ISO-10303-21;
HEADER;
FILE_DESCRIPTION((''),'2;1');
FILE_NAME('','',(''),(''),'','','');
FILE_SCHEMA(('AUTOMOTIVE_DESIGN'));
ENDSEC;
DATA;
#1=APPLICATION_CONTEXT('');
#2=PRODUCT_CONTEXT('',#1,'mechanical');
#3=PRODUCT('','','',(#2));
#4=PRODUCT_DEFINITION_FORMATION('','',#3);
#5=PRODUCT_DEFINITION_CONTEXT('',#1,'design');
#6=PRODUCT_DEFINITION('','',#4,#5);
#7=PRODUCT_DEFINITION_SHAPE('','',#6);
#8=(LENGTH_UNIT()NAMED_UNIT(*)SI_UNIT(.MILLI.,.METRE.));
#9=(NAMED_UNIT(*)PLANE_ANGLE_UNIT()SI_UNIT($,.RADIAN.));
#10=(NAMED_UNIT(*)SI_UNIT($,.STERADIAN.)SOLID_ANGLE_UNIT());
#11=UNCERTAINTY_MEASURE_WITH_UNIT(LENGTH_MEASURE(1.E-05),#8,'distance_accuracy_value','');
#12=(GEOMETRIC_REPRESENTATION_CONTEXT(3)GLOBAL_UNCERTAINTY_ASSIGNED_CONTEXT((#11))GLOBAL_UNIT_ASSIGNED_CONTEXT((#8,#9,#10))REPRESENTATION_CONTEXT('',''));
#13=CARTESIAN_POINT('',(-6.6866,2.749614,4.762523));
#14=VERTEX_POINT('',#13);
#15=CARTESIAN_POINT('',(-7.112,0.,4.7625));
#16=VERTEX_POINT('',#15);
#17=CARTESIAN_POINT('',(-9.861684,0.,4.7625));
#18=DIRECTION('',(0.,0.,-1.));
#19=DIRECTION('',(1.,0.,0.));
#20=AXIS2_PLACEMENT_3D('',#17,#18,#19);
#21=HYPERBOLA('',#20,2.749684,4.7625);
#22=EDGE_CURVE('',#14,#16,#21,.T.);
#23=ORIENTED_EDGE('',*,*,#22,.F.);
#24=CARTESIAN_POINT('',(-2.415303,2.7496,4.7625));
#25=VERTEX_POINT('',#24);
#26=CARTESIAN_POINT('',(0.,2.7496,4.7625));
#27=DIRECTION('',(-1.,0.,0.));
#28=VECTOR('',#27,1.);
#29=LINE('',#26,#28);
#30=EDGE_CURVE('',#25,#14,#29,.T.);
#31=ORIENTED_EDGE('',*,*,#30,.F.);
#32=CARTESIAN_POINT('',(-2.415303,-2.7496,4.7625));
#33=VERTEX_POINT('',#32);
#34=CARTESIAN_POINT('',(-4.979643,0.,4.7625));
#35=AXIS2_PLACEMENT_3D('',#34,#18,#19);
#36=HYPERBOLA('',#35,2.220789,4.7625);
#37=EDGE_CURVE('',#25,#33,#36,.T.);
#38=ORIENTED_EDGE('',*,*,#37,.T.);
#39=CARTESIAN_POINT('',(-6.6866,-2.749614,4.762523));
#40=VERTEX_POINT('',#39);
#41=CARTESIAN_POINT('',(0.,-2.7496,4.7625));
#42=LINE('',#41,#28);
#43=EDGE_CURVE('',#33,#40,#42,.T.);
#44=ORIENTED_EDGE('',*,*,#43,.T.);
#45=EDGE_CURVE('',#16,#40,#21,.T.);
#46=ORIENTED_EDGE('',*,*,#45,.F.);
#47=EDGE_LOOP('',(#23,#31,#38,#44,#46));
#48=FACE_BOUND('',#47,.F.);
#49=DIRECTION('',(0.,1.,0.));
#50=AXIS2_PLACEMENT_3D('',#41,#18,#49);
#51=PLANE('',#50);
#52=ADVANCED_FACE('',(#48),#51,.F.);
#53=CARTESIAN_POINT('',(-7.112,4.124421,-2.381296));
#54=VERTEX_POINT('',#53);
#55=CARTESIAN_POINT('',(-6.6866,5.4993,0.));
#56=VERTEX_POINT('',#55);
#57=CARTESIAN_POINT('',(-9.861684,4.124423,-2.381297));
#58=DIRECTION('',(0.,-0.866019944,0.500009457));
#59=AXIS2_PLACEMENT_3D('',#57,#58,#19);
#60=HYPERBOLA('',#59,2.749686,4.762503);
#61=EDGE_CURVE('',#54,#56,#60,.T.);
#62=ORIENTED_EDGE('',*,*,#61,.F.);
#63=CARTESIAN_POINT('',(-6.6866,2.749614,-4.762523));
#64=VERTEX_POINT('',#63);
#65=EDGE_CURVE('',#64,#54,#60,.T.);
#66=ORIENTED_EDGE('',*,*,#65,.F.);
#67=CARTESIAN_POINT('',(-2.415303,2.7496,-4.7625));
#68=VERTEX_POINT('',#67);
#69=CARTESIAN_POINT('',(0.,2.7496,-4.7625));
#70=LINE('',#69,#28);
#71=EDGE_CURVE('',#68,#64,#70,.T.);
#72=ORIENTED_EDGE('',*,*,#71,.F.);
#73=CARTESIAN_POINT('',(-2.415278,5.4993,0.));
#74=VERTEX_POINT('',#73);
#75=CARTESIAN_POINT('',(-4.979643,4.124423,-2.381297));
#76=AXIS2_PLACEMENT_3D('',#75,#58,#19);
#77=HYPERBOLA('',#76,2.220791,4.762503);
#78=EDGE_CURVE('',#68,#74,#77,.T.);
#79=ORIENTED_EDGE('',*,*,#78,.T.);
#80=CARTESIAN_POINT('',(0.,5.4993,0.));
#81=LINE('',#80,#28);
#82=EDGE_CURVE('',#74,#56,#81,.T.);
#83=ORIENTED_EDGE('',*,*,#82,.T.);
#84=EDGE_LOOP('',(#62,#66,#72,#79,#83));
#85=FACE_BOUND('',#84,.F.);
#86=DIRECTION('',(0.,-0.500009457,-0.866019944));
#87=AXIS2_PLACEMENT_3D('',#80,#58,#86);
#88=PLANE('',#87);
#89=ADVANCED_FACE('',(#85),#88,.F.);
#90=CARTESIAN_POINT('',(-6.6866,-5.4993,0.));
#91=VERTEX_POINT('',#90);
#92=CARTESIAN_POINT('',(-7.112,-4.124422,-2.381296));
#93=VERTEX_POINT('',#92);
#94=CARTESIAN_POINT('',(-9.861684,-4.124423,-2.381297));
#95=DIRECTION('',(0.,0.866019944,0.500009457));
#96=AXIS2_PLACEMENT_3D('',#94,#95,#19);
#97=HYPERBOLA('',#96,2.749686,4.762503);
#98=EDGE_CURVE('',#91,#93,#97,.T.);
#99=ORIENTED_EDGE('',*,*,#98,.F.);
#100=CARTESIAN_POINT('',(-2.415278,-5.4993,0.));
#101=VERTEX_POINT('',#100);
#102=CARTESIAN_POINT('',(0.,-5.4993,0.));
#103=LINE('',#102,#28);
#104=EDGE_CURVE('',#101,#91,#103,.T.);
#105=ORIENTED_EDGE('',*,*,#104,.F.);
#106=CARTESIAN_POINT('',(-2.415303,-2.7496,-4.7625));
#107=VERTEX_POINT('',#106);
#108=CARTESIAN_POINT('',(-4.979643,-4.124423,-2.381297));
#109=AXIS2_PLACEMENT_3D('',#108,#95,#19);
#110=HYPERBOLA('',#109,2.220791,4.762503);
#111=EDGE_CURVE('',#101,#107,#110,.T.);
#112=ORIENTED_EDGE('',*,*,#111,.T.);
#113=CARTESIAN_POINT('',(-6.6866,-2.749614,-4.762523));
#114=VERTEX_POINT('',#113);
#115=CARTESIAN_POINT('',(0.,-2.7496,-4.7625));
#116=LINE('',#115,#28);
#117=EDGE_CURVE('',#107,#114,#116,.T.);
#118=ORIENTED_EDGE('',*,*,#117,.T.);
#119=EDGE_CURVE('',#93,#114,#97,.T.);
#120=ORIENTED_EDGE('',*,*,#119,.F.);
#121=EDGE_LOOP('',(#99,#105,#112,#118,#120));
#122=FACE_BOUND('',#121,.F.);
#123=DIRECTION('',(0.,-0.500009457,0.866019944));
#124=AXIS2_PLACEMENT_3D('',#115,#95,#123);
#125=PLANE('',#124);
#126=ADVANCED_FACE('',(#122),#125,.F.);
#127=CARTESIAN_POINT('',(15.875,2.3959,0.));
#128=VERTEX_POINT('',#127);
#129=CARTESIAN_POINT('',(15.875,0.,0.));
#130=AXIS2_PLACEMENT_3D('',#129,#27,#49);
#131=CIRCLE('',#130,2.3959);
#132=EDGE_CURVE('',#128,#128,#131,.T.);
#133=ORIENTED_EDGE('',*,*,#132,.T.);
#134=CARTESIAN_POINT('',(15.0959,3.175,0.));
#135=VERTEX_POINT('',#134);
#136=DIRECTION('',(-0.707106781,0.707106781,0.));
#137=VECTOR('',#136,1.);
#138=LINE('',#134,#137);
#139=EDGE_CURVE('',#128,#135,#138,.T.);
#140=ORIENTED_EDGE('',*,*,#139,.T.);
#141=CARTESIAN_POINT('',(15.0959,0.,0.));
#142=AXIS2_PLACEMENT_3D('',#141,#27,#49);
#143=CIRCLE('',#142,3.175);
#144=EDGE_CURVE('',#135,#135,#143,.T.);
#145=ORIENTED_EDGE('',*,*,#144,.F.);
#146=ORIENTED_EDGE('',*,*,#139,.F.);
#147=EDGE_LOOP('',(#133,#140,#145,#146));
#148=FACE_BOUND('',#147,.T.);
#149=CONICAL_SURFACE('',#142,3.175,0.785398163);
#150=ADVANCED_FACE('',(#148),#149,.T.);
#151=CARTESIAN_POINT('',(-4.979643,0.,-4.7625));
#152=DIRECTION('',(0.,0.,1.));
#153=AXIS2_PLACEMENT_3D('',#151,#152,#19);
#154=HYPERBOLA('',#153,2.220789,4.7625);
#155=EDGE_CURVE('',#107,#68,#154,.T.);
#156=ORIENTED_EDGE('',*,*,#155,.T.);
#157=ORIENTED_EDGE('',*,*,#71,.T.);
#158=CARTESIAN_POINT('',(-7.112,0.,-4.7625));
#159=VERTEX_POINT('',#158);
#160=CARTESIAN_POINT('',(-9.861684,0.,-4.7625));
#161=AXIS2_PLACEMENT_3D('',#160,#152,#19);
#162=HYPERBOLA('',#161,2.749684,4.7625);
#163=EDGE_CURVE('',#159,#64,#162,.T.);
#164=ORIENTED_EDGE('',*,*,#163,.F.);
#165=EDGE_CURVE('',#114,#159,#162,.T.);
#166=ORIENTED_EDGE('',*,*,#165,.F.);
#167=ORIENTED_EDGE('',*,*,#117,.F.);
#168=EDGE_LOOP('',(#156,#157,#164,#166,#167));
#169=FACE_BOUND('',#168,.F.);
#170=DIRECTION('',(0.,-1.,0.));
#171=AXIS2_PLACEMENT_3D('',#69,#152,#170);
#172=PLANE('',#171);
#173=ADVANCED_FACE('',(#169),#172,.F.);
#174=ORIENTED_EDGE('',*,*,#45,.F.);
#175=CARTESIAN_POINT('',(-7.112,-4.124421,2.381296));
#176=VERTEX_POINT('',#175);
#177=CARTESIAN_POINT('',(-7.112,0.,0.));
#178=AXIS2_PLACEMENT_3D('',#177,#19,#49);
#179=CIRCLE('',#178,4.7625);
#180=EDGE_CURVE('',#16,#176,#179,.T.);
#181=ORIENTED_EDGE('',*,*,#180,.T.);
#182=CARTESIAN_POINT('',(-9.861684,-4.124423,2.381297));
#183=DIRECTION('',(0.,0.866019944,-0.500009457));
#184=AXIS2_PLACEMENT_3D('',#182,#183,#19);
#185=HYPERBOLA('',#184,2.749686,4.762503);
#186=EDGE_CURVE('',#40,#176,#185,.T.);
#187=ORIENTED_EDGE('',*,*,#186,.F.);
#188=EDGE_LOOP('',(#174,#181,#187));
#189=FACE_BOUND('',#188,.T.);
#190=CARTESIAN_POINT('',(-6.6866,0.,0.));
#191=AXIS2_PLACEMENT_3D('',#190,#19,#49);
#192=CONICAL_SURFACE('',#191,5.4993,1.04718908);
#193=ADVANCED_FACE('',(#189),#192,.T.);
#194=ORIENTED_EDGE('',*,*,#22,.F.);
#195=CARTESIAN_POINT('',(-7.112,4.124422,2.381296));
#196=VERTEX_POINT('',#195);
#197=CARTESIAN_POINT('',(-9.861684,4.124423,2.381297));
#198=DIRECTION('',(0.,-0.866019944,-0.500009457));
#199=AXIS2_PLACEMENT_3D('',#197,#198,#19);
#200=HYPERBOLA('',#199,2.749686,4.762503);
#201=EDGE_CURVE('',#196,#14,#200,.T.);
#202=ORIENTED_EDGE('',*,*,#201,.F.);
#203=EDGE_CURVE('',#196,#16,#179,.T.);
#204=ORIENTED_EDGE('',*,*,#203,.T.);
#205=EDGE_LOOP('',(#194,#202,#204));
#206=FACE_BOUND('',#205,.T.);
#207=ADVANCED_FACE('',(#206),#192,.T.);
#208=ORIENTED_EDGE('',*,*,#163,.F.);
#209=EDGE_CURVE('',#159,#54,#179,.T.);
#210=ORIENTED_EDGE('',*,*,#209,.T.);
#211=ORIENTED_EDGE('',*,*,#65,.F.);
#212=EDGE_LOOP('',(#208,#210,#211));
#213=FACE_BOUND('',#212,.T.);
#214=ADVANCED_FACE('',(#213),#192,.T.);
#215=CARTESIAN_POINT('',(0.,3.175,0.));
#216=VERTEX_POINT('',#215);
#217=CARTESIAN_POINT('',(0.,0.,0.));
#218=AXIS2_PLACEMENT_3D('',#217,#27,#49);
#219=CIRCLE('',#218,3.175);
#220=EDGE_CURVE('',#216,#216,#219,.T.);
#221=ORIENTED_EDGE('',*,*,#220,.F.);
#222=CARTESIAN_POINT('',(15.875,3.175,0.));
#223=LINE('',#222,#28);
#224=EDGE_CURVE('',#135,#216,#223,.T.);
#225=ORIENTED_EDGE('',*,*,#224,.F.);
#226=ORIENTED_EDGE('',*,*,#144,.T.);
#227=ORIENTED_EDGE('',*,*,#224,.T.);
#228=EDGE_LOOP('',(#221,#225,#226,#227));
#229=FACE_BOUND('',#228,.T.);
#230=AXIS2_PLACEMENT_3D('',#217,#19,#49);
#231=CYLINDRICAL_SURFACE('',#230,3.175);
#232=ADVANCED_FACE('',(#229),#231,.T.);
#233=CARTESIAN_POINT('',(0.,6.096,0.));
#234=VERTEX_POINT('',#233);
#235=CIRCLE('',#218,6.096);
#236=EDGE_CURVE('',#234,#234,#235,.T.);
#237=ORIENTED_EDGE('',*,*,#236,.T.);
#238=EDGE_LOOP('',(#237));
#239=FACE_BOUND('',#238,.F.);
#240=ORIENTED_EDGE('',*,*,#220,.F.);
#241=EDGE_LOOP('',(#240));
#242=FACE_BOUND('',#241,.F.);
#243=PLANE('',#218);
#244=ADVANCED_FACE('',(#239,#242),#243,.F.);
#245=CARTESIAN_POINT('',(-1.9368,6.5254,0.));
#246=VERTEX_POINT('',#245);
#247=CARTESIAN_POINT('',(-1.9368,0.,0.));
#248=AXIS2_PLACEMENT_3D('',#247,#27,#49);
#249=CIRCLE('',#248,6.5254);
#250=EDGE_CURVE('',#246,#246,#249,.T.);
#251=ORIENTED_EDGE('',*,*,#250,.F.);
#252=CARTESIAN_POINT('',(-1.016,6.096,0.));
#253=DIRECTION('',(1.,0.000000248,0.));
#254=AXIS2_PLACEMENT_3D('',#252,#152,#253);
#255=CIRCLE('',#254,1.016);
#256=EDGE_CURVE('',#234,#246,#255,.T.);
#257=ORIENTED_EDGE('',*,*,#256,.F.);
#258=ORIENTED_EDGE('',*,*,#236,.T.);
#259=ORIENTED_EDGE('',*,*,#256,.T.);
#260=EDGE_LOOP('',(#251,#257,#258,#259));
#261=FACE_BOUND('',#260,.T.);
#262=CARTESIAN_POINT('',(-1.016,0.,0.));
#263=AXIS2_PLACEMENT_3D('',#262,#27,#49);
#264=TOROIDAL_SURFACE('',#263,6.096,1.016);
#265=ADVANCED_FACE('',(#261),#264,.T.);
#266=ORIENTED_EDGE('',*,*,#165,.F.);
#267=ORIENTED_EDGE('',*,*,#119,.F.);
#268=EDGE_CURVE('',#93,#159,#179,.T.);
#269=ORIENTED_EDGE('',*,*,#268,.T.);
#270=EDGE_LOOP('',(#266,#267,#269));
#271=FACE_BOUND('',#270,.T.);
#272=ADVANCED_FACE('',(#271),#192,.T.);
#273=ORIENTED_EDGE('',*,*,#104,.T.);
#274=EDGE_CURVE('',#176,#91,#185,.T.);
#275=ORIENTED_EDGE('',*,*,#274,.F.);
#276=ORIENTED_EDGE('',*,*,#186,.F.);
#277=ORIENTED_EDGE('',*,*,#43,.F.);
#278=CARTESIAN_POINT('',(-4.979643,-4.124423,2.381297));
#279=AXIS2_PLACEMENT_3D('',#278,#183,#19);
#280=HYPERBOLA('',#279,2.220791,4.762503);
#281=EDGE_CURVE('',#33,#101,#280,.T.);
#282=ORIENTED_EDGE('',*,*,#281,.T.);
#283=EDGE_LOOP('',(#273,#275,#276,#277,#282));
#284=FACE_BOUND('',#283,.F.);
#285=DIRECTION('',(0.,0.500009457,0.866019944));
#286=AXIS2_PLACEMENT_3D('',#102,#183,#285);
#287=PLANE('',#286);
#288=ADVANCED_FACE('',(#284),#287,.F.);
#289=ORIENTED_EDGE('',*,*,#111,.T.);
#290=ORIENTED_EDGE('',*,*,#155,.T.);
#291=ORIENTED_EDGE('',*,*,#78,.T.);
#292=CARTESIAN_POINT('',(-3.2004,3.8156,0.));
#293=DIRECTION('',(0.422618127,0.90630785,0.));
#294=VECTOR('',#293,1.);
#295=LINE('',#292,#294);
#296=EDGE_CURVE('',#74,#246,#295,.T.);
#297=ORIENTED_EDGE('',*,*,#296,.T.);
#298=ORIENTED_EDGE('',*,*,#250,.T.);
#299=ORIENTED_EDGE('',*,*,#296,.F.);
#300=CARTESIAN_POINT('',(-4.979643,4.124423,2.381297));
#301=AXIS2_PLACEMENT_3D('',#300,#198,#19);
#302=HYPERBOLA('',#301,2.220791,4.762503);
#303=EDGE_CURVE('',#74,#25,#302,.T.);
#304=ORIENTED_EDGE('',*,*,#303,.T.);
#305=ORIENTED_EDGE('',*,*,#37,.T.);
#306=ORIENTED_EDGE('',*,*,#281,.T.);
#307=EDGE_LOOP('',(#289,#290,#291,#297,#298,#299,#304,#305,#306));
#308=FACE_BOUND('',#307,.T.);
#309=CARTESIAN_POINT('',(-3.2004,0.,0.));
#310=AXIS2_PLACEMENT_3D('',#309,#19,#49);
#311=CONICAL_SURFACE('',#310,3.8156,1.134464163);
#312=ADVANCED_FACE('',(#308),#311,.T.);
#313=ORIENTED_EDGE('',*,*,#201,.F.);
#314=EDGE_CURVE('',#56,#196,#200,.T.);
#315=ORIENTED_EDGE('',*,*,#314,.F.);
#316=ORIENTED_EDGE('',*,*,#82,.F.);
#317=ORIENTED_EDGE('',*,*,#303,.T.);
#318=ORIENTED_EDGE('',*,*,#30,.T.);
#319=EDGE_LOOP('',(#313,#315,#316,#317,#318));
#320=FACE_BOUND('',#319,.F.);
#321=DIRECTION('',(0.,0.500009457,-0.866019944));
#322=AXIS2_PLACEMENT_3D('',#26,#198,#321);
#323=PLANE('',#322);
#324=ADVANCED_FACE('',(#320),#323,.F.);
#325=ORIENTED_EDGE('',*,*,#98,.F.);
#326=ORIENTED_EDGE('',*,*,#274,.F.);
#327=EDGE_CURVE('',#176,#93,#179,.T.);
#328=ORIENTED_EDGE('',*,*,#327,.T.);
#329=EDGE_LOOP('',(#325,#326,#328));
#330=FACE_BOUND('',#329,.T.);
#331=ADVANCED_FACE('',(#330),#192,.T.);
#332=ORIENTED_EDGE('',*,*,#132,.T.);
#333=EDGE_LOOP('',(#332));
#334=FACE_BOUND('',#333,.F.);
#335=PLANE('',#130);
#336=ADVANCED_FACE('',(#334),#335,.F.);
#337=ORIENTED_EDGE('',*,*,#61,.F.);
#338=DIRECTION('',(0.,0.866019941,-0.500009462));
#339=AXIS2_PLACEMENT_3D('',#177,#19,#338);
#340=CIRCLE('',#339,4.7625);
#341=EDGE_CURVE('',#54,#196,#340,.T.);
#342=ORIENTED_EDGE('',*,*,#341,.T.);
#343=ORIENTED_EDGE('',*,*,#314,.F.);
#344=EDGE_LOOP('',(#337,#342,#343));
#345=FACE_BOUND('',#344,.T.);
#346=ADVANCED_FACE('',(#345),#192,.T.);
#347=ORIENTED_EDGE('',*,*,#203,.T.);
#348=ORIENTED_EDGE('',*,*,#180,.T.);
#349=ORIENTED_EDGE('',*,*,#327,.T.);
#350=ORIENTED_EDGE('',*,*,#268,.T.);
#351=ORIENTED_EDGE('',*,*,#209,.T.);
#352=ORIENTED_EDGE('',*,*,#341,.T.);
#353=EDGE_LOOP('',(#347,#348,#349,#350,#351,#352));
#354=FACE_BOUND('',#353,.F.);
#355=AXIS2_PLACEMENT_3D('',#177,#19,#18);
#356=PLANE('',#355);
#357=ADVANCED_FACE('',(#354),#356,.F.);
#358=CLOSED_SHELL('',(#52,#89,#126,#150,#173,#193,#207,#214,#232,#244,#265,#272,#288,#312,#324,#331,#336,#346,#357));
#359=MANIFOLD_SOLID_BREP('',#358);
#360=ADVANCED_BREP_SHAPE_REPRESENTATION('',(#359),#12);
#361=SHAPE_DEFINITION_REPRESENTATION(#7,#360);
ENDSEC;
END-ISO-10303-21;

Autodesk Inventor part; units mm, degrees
ref_plane "YZ Plane" through (0, 0, 0) normal (1, 0, 0) x (0, 1, 0)
ref_plane "XZ Plane" through (0, 0, 0) normal (0, 1, 0) x (-1, 0, 0)
sketch "Sketch1" plane through (0, 0, 0) normal (0, 0, 1) x (1, 0, 0)
  line L0 (-3.2004, 0) -> (-3.2004, 3.8156)
  line L1 (0, 6.096) -> (0, 3.175)
  line L2 (4.1148, 3.175) -> (15.875, 3.175)
  line L3 (15.875, 3.175) -> (15.875, 0)
  line L4 (15.875, 0) -> (-3.2004, 0)
  arc A0 (0, 6.096) -> (-1.9368, 6.5254) centre (-1.016, 6.096) ccw
  line L5 (0, -1.4605) -> (0, 8.7631) projected
  line L6 (-7.0155, 0) -> (19.6901, 0) projected
  line L7 (0, 3.175) -> (0.0001, 3.175)
  line L8 (0.0001, 3.175) -> (0.0001, 3.175)
  line L9 (0.0001, 3.175) -> (2.2098, 3.175)
  line L10 (2.2098, 3.175) -> (4.1148, 3.175)
  line L11 (-3.2004, 3.8156) -> (-1.9368, 6.5254)
  line L12 (0.0001, 3.175) -> (4.1148, 3.175) construction
  line L13 (4.1148, 3.175) -> (4.1148, 0) construction
  dimension "d0" = 1.016
  dimension "d1" = 15.875
  dimension "d2" = 11.7602
  dimension "d3" = 14.224
  dimension "d4" = 6.35
  dimension "d5" = 3.2004
  dimension "d15" = 6.35
  dimension "d16" = 6.35
  dimension "d17" = 0.0001
  dimension "d18" = 1.905
  dimension "d19" = 25
revolve "Body" add sketch "Sketch1" angle 360 about axis through (15.875, 0, 0) along (-1, 0, 0)
sketch "Sketch2" plane through (0, 0, 0) normal (1, 0, 0) x (0, 0, -1)
  line L0 (4.7625, 2.7496) -> (4.7625, -2.7496)
  line L1 (4.7625, -2.7496) -> (0, -5.4993)
  line L2 (0, -5.4993) -> (-4.7625, -2.7496)
  line L3 (-4.7625, -2.7496) -> (-4.7625, 2.7496)
  line L4 (-4.7625, 2.7496) -> (0, 5.4993)
  line L5 (0, 5.4993) -> (4.7625, 2.7496)
  point P0 (0, 0)
  point P1 (0, 0)
  dimension "d23" = 9.525
extrude "Head" add sketch "Sketch2" against normal blind 7.112
sketch "Sketch3" plane through (0, 0, 0) normal (0, 0, 1) x (1, 0, 0)
  line L0 (-7.112, 4.7625) -> (-7.112, 5.4993)
  line L1 (-7.112, 5.4993) -> (-6.6866, 5.4993)
  line L2 (-6.6866, 5.4993) -> (-7.112, 4.7625)
  line L3 (-8.0513, 0) -> (-1.476, 0) projected
  line L4 (-7.112, 5.4993) -> (-7.112, 2.7496) projected
  line L5 (-2.4153, 5.4993) -> (-7.112, 5.4993) projected
  point P0 (-7.112, 2.7496)
  dimension "d8" = 30
  dimension "d22" = 9.525
revolve "Chamfer1" cut sketch "Sketch3" angle 360 about axis through (-10, 0, 0) along (1, 0, 0)
thread "Thread" size "1/4-20 UNC" class "2A" standard "ANSI Unified Screw Threads" length 11.7602
chamfer "Chamfer2" distance 0.7791 distance2 0.7791 1 edges at (15.875, -3.175, 0) measured on face at (15.875, 0.0371, -1.7957)
ref_plane "Work Plane1" through (10.95, 0, 0) normal (0, 0, -1) x (1, 0, 0)
equation "\"d23\" = SW"
equation "\"d6\" = KOH"
equation "\"d10\" = GEL"
equation "\"d13\" = -0.5 * SPD + 0.5 * GD"
equation "\"d14\" = GUL"
equation "\"d0\" = PHH"
equation "\"d1\" = NLG"
equation "\"d2\" = GEL"
equation "\"d3\" = LADI"
equation "\"d4\" = GD"
equation "\"d5\" = 0.45 * KOH"
equation "\"d15\" = SD2"
equation "\"d16\" = BDM"
equation "\"d18\" = GAL"
equation "\"d19\" = KEWI"
equation "\"d8\" = ANG1"
equation "\"d22\" = SW0"
equation "\"NLG\" = 15.875"
equation "\"GD\" = NND"
equation "\"BDM\" = NND"
equation "\"KOH\" = 7.112"
equation "\"GEL\" = 11.7602"
equation "\"LADI\" = 14.224"
equation "\"SW\" = 9.525"
equation "\"PHH\" = 1.016"
equation "\"SW0\" = SW"
equation "\"SPD\" = 4.79184"
equation "\"SD2\" = NND"
equation "\"SD\" = 0"
equation "\"ANG1\" = 30deg"
equation "\"KEWI\" = 25deg"
equation "\"GAL\" = 1.905"
equation "\"GUL\" = 0.77908"
equation "\"THREADDIA\" = 6.35"
equation "\"SDH\" = SW"
equation "\"TOA\" = 30deg"
equation "\"NND\" = 6.35"
equation "\"E0\" = 1.155 * SW"
equation "\"GD1\" = 4.79184"
properties part number "1_4-20 UNC x 0.625" material "Steel, Mild"
